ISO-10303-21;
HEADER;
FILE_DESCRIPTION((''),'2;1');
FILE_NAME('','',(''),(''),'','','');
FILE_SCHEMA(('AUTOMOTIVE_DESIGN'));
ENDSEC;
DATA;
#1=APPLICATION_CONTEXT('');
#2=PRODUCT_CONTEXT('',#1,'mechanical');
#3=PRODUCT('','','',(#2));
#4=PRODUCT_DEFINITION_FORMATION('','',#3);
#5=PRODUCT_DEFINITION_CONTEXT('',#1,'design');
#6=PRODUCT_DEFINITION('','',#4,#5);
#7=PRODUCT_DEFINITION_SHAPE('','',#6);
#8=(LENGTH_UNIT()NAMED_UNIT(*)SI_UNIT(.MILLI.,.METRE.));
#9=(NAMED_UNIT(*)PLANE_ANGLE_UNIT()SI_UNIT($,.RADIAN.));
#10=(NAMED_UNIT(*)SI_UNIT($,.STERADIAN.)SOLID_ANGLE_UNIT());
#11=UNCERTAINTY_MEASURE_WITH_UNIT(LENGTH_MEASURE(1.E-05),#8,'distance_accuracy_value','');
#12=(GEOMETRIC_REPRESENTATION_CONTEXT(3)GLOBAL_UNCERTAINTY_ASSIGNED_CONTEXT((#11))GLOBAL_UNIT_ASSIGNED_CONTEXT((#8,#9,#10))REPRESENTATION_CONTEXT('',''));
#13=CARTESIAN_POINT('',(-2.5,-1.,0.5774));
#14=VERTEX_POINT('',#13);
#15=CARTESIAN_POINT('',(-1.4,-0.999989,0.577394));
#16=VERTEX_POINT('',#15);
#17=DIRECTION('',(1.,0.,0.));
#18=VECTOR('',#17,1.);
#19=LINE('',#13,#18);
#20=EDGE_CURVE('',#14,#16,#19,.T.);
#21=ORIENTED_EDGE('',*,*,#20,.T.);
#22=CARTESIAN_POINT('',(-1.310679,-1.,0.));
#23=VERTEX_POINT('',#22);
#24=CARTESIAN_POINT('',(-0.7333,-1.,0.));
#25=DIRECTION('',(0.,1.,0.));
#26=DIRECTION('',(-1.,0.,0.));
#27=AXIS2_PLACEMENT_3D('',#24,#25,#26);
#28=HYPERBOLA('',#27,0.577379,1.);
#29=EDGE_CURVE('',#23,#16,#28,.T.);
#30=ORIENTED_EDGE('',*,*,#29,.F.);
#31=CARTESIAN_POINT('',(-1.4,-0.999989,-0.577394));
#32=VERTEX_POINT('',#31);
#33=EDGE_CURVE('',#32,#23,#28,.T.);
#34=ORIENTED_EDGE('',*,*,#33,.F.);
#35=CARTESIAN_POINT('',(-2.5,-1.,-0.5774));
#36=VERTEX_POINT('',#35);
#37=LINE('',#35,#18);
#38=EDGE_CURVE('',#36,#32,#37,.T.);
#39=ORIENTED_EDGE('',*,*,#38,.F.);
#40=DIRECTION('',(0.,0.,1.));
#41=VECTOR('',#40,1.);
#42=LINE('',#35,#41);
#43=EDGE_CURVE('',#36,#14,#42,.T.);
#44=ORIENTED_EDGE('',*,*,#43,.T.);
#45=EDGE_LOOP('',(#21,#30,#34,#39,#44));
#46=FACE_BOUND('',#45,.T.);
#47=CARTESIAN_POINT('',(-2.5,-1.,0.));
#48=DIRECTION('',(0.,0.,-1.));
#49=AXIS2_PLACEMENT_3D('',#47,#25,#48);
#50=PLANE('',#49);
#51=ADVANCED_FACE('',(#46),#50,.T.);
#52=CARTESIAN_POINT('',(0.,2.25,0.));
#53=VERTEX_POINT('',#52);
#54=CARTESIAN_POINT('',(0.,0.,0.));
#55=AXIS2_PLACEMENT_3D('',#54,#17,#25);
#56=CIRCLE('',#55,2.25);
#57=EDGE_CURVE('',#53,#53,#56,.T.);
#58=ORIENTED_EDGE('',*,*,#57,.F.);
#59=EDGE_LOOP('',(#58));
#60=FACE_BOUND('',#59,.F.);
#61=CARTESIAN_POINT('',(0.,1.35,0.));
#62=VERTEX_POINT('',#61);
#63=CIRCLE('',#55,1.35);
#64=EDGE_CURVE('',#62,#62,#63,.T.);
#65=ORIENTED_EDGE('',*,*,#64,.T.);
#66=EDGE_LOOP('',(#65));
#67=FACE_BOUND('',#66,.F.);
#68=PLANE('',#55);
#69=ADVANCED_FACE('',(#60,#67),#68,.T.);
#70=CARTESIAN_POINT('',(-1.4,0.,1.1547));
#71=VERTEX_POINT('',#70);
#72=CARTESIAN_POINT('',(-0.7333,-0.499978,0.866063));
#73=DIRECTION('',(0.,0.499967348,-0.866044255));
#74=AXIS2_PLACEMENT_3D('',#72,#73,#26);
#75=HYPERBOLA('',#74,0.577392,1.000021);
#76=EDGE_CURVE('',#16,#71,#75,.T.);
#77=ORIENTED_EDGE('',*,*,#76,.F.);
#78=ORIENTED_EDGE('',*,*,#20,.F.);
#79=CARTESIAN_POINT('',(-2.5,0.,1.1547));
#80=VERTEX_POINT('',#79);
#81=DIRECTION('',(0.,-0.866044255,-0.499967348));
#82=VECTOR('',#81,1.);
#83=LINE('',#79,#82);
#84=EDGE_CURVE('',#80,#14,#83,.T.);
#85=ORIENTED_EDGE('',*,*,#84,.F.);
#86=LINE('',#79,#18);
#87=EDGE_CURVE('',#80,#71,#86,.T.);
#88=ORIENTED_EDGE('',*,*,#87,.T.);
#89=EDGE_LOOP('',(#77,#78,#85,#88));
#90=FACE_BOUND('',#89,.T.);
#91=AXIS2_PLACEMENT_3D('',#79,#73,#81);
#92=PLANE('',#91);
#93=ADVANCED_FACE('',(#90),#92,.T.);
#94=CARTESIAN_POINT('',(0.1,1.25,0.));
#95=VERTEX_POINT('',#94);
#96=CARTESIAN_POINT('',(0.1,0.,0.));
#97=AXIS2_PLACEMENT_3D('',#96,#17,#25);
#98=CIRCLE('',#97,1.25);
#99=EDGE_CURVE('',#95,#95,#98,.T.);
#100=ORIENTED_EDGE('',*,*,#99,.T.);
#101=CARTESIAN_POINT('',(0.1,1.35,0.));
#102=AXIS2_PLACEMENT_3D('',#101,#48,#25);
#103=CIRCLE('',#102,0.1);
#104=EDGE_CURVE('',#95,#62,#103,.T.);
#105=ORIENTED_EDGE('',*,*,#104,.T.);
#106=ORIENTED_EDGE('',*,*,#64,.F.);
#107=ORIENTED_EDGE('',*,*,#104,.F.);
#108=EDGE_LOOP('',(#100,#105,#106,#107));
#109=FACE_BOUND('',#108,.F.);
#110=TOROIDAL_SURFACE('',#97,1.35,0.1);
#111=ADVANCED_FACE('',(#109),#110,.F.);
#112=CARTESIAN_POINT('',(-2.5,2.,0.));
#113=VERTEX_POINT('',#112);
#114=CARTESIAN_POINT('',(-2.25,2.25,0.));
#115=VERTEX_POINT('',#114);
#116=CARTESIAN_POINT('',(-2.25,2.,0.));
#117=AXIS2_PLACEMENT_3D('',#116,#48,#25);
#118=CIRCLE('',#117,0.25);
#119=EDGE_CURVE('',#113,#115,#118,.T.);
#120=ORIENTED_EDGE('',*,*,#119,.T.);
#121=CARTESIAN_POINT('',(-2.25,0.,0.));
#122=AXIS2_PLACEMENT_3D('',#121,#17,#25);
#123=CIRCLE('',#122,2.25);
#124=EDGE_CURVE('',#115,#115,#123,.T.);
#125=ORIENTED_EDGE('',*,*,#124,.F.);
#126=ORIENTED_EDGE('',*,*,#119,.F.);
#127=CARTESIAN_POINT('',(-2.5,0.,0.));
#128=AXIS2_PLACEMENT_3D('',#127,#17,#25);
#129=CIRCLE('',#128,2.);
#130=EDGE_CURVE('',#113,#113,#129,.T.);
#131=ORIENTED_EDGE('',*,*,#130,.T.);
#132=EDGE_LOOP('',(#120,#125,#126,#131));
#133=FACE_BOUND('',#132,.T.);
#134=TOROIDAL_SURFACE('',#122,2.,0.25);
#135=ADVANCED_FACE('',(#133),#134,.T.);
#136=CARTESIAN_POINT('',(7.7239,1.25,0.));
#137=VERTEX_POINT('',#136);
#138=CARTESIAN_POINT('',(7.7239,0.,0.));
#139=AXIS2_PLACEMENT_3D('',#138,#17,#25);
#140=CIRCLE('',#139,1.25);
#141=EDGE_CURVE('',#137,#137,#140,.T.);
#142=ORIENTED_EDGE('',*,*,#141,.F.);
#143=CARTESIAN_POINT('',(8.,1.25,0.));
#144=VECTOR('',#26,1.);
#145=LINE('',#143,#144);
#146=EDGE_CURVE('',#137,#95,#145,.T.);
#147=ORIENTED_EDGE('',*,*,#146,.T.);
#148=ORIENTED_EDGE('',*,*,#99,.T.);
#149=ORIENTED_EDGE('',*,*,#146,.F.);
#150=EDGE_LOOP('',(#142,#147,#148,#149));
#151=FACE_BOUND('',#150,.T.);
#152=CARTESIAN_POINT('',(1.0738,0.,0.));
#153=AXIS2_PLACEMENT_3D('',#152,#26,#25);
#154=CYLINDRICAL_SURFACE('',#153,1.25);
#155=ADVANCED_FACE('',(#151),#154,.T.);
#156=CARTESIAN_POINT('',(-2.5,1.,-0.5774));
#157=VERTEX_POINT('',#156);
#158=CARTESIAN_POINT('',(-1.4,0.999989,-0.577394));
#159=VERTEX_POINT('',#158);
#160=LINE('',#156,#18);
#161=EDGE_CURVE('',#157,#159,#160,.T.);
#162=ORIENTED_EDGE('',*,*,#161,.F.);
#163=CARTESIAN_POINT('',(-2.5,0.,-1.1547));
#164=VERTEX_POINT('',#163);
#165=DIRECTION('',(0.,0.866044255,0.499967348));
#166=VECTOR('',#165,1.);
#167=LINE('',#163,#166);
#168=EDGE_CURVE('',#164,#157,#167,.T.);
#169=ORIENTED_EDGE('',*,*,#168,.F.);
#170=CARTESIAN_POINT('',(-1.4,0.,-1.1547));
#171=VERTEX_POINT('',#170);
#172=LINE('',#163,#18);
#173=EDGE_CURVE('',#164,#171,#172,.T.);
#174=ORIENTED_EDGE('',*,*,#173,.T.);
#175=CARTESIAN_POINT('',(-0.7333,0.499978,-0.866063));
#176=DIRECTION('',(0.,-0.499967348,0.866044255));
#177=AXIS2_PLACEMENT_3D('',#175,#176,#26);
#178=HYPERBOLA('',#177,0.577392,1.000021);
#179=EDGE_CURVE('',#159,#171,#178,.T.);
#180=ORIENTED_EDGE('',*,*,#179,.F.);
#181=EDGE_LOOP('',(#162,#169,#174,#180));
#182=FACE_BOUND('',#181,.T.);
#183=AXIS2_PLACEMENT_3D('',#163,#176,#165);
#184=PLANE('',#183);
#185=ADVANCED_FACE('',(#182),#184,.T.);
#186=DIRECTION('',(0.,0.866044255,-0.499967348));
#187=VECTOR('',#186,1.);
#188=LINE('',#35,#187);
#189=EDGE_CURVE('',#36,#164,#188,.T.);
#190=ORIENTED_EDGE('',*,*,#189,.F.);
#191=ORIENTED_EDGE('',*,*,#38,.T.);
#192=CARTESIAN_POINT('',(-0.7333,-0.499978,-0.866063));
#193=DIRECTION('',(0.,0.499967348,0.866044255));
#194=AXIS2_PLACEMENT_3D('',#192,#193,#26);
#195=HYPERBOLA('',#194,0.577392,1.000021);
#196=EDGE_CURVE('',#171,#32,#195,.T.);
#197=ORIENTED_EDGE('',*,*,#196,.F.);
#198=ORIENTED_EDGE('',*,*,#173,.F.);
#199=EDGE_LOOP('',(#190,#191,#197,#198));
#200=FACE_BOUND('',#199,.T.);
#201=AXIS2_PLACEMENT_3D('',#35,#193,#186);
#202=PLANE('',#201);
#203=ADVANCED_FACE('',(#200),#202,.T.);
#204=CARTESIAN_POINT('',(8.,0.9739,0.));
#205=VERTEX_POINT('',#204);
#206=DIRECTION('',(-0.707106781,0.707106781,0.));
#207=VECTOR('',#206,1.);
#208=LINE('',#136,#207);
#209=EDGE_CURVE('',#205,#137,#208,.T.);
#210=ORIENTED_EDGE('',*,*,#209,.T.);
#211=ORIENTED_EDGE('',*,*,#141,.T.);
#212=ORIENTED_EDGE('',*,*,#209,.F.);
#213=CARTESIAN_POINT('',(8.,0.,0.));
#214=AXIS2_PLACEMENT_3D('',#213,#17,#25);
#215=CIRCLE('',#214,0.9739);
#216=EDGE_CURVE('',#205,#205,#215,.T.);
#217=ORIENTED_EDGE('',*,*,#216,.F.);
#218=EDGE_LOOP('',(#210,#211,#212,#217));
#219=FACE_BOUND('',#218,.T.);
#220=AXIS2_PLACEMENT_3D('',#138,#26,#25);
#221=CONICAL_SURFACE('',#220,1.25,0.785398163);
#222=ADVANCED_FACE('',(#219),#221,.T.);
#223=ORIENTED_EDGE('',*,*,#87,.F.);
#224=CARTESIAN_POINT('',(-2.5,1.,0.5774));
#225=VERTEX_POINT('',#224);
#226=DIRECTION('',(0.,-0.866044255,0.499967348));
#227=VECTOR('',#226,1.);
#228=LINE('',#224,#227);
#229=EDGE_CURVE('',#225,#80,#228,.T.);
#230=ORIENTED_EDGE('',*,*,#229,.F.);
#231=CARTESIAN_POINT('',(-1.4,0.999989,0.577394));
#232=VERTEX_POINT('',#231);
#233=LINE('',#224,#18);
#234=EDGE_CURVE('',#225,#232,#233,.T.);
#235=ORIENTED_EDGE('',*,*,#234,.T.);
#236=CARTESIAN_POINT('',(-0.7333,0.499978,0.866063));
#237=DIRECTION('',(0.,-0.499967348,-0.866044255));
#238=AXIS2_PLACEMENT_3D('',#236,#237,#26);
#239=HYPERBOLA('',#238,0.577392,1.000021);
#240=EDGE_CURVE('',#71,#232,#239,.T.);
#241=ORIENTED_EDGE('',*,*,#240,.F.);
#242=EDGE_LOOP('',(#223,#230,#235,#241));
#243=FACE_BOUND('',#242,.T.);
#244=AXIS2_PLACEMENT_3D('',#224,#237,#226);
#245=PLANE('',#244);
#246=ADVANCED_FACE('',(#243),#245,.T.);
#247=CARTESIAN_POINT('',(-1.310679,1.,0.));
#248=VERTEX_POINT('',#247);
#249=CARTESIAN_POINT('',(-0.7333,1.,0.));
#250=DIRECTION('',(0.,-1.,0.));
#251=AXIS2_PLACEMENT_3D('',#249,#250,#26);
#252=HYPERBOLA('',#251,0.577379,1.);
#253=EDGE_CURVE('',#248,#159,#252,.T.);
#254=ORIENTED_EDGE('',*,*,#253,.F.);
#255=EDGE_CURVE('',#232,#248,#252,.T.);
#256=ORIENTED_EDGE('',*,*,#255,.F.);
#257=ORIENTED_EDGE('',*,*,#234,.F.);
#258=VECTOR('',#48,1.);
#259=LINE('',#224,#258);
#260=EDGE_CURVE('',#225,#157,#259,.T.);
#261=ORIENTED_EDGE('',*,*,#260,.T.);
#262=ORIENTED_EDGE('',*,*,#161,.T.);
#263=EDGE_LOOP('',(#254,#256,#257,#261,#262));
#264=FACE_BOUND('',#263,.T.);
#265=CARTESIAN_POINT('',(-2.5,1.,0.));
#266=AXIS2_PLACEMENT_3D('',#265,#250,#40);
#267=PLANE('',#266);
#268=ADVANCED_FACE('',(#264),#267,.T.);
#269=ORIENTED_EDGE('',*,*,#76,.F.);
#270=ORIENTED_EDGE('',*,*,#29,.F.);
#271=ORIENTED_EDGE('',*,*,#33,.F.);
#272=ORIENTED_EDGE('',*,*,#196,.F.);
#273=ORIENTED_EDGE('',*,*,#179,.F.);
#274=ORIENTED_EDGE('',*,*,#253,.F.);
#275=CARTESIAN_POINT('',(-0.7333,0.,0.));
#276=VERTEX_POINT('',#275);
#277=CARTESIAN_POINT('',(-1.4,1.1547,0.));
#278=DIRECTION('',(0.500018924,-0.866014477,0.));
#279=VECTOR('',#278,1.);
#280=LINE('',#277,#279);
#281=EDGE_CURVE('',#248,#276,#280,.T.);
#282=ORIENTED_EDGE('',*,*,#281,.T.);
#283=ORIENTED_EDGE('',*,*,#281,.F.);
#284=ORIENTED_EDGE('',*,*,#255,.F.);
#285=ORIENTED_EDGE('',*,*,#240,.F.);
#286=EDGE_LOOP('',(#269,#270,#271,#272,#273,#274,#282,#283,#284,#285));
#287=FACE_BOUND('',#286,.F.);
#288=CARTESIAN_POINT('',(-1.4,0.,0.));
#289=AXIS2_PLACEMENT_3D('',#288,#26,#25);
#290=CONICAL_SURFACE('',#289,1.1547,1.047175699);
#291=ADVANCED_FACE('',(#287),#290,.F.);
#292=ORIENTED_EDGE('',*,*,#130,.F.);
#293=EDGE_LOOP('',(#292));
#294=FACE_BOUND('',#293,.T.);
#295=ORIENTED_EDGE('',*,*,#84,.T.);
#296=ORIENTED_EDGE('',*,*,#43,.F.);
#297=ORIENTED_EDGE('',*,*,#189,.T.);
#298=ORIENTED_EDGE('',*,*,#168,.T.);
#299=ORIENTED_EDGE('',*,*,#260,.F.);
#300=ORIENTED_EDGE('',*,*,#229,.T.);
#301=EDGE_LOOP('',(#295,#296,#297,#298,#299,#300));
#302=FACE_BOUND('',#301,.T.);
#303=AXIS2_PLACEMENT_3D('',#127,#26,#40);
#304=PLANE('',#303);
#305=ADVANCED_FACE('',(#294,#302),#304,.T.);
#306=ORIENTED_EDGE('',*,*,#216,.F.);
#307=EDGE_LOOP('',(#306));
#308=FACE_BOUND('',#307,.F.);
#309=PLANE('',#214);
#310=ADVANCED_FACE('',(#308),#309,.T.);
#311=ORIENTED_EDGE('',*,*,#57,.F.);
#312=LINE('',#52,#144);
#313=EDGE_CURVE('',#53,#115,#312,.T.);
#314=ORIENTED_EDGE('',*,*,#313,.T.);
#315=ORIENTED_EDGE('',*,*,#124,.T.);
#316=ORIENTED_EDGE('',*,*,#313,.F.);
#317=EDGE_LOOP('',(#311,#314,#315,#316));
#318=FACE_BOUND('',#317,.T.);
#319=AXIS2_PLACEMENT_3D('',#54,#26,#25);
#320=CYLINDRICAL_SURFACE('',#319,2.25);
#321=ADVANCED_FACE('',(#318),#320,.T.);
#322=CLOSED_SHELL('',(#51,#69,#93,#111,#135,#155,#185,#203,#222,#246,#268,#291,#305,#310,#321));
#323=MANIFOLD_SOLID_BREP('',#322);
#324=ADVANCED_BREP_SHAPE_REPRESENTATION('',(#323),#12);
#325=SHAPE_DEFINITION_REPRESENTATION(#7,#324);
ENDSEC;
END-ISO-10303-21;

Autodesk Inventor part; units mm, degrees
ref_plane "YZ Plane" through (0, 0, 0) normal (1, 0, 0) x (0, 1, 0)
ref_plane "XZ Plane" through (0, 0, 0) normal (0, 1, 0) x (-1, 0, 0)
sketch "スケッチ1" plane through (0, 0, 0) normal (0, 0, 1) x (1, 0, 0)
  line L0 (-0.7333, 0) -> (8, 0)
  line L1 (8, 0) -> (8, 1.25)
  line L2 (8, 1.25) -> (1.35, 1.25)
  line L3 (1.35, 1.25) -> (1.0738, 1.25)
  line L4 (1.0738, 1.25) -> (0, 1.25)
  line L5 (0, 1.25) -> (0, 2.25)
  line L6 (0, 2.25) -> (-2.5, 2.25)
  line L7 (-2.5, 2.25) -> (-2.5, 1.1547)
  line L8 (-2.5, 1.1547) -> (-1.4, 1.1547)
  line L9 (-1.4, 1.1547) -> (-0.7333, 0)
  line L10 (-4.6, 0) -> (10.1, 0) projected
  line L11 (0, -0.45) -> (0, 2.7) projected
  line L12 (1.35, 1.25) -> (0, 1.25) construction
  dimension "d1" = 6.65
  dimension "d2" = 0.2762
  dimension "d3" = 2.5
  dimension "d4" = 1.1
  dimension "d5" = 60
  dimension "d6" = 2.5
  dimension "d7" = 2.5
  dimension "d8" = 2.3094
  dimension "d9" = 4.5
  dimension "d26" = 8
revolve "ボディ" add sketch "スケッチ1" angle 360 about axis through (-0.7333, 0, 0) along (1, 0, 0)
sketch "スケッチ2" plane through (-2.5, 0, 0) normal (-1, 0, 0) x (0, 0, 1)
  circle A0 centre (0, 0) radius 1.1547 projected
  line L0 (0, -3.15) -> (0, 3.15) projected
  line L1 (-3.15, 0) -> (3.15, 0) projected
  line L2 (1.1547, 0) -> (0.5774, -1)
  line L3 (0.5774, -1) -> (-0.5774, -1)
  line L4 (-0.5774, -1) -> (-1.1547, 0)
  line L5 (-1.1547, 0) -> (-0.5774, 1)
  line L6 (-0.5774, 1) -> (0.5774, 1)
  line L7 (0.5774, 1) -> (1.1547, 0)
extrude "長穴" add sketch "スケッチ2" against normal up to next contours L7 A0 | A0 L2 | L6 L0 A0 | A0 L0 L3 | L0 L6 A0 | A0 L3 L0 | L4 A0 | A0 L5
fillet "フィレット1" radius 0.25 1 edges at (-2.5, -2.25, 0)
thread "ねじ" size "M2.5x0.45" class "6g" standard "ISO Metric profile" length 6.65
chamfer "面取り1" distance 0.2761 distance2 0.2761 1 edges at (8, -1.25, 0) measured on face at (8, 0.4797, 0.7189)
ref_plane "Work Plane1" through (29, 0, 0) normal (0, -1, 0) x (1, 0, 0)
fillet "Fillet2" radius 0.1 1 edges at (0, -1.25, 0)
equation "\"d30\" = R"
equation "\"d17\" = RR"
equation "\"d13\" = GEL"
equation "\"d15\" = -0.5 * SPD + 0.5 * GD"
equation "\"d16\" = GUL"
equation "\"d1\" = GEL"
equation "\"d3\" = KOH"
equation "\"d4\" = INTI"
equation "\"d6\" = GD"
equation "\"d7\" = BDM"
equation "\"d8\" = 1.1547 * SW"
equation "\"d9\" = KOD"
equation "\"d26\" = NLG"
equation "\"GD\" = NND"
equation "\"NLG\" = 8"
equation "\"GEL\" = 6.65"
equation "\"KOD\" = 4.5"
equation "\"KOH\" = 2.5"
equation "\"INTI\" = 1.1"
equation "\"GAL\" = 0.61345 * PTC"
equation "\"GUL\" = 0.61345 * PTC"
equation "\"BDM\" = NND"
equation "\"SW\" = 2"
equation "\"RR\" = 0.25"
equation "\"SPD\" = NND - 1.2269 * PTC"
equation "\"R\" = 0.1"
equation "\"PHH\" = 0.1"
equation "\"GD1\" = THREADDIA - 1.2269 * PTC"
equation "\"THREADDIA\" = 2.5"
equation "\"FAWI\" = 45deg"
equation "\"PTC\" = 0.45"
equation "\"NND\" = 2.5"
equation "\"TOA\" = 30deg"
equation "\"E0\" = 1.155 * SW"
properties part number "JIS B 1176 - M2.5 x 8" material "鋼、軟鋼"
